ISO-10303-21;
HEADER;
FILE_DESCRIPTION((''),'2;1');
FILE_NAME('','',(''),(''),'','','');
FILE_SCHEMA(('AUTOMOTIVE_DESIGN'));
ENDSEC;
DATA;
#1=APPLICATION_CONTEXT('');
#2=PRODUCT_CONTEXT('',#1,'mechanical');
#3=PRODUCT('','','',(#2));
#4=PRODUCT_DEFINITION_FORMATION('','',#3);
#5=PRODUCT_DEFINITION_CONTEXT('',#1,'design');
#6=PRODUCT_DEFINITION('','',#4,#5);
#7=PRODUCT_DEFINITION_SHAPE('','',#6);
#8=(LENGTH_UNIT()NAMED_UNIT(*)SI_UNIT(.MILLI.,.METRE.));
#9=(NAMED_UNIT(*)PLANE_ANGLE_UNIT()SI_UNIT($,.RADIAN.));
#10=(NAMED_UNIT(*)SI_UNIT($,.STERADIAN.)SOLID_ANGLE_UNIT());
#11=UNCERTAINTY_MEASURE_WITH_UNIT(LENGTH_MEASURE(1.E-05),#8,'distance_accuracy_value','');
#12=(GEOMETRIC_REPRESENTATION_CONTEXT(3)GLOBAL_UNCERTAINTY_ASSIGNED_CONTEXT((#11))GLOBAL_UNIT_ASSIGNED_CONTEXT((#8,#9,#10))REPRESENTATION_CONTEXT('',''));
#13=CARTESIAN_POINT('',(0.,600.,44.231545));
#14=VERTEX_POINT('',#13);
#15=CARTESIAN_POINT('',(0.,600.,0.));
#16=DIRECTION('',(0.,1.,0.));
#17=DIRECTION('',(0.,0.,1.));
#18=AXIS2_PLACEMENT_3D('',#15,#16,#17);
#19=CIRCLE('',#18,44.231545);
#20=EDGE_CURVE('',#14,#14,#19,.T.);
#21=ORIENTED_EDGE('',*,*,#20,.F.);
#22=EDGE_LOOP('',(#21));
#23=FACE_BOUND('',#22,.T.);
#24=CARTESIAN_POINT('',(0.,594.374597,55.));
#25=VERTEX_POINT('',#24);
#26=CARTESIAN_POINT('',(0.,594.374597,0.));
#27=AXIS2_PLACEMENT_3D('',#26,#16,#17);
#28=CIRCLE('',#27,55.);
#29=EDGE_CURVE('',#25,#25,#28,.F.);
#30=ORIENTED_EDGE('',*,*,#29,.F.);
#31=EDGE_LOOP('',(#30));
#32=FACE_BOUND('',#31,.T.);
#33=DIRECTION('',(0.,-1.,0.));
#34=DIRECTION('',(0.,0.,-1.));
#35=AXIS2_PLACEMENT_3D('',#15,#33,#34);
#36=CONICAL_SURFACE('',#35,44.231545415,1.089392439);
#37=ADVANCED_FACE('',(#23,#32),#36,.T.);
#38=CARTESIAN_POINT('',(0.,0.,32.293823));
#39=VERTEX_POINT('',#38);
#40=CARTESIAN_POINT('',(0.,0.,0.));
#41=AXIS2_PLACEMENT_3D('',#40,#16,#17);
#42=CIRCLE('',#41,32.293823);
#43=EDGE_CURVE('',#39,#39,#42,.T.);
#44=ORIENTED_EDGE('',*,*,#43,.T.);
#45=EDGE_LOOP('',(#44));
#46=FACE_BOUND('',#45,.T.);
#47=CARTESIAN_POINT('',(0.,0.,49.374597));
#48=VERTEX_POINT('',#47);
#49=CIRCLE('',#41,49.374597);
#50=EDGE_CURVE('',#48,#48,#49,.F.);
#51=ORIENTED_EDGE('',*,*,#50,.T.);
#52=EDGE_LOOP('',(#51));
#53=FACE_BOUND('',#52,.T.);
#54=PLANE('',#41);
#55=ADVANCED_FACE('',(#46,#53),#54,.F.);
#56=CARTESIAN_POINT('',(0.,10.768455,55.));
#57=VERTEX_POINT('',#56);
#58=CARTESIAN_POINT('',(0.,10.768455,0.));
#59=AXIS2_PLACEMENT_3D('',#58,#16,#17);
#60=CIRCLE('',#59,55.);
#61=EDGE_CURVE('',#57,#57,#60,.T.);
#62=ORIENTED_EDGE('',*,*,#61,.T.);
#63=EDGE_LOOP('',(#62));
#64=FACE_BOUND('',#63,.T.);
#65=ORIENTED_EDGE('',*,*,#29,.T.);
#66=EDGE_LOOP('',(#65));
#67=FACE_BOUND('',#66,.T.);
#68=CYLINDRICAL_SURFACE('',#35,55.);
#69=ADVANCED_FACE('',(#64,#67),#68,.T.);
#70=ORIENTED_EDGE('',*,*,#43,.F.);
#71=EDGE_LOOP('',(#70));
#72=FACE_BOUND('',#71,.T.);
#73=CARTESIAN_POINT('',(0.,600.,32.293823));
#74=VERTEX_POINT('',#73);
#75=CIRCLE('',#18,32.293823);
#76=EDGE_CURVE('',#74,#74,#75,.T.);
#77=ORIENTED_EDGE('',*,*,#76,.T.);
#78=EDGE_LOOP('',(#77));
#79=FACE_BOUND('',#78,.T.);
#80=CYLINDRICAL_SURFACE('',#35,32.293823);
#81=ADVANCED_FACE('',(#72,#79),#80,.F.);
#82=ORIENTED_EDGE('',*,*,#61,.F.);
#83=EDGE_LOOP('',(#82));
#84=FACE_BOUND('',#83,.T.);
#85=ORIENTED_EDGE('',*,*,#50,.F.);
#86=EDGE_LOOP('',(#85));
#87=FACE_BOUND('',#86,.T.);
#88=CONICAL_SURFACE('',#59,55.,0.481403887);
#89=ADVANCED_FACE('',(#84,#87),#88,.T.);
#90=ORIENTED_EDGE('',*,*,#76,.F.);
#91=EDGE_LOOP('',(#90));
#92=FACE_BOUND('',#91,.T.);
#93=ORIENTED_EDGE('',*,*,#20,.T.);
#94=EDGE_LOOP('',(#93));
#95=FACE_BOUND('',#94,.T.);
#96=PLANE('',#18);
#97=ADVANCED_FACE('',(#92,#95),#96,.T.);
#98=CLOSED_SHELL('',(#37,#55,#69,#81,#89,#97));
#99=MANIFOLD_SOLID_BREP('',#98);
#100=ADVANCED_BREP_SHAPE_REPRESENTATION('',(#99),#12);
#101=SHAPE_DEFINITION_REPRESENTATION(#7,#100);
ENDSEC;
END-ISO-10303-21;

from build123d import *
from OCP.BRepFilletAPI import BRepFilletAPI_MakeChamfer

# Parameters (mm, degrees)
SKETCH1_R           = 55
BOSS_EXTRUDE1_DEPTH = 600
SKETCH2_R           = 32.293822609
CUT_EXTRUDE1_DEPTH  = 606.020660804
CHAMFER1_SIZE       = 5.625403432
CHAMFER1_SIZE2      = 10.768454585


with BuildPart() as part:
    # Sketch1 → Boss-Extrude1 (new body)
    with BuildSketch(Plane(origin=(0, 0, 0), x_dir=(1, 0, 0), z_dir=(0, 1, 0))):
        Circle(SKETCH1_R)
    extrude(amount=BOSS_EXTRUDE1_DEPTH)

    # Sketch2 → Cut-Extrude1 (cut, through all)
    with BuildSketch(Plane(origin=(0, 0, 0), x_dir=(1, 0, 0), z_dir=(0, 1, 0))):
        Circle(SKETCH2_R)
    extrude(amount=CUT_EXTRUDE1_DEPTH, mode=Mode.SUBTRACT)

    # Chamfer1: one chamfer whose edges measure the first distance from different faces: ONE call of the kernel's chamfer builder (chamfer() names one face for all edges)
    chamfer1_edges_1 = [part.edges().sort_by_distance(p)[0] for p in [
        (-55, 600, 0),
    ]]
    chamfer1_side_1 = [part.faces().sort_by_distance(p)[0] for p in [
        (-55, 300, 0),
    ]]
    chamfer1_edges_2 = [part.edges().sort_by_distance(p)[0] for p in [
        (-55, 0, 0),
    ]]
    chamfer1_side_2 = [part.faces().sort_by_distance(p)[0] for p in [
        (-53.444365081, 0, 0),
    ]]
    chamfer1 = BRepFilletAPI_MakeChamfer(part.part.solid().wrapped)
    for e in chamfer1_edges_1:
        chamfer1.Add(CHAMFER1_SIZE, CHAMFER1_SIZE2, e.wrapped, chamfer1_side_1[0].wrapped)  # the first distance lies on this face
    for e in chamfer1_edges_2:
        chamfer1.Add(CHAMFER1_SIZE, CHAMFER1_SIZE2, e.wrapped, chamfer1_side_2[0].wrapped)  # the first distance lies on this face
    add(Compound.cast(chamfer1.Shape()), mode=Mode.REPLACE)


solid = part.part
